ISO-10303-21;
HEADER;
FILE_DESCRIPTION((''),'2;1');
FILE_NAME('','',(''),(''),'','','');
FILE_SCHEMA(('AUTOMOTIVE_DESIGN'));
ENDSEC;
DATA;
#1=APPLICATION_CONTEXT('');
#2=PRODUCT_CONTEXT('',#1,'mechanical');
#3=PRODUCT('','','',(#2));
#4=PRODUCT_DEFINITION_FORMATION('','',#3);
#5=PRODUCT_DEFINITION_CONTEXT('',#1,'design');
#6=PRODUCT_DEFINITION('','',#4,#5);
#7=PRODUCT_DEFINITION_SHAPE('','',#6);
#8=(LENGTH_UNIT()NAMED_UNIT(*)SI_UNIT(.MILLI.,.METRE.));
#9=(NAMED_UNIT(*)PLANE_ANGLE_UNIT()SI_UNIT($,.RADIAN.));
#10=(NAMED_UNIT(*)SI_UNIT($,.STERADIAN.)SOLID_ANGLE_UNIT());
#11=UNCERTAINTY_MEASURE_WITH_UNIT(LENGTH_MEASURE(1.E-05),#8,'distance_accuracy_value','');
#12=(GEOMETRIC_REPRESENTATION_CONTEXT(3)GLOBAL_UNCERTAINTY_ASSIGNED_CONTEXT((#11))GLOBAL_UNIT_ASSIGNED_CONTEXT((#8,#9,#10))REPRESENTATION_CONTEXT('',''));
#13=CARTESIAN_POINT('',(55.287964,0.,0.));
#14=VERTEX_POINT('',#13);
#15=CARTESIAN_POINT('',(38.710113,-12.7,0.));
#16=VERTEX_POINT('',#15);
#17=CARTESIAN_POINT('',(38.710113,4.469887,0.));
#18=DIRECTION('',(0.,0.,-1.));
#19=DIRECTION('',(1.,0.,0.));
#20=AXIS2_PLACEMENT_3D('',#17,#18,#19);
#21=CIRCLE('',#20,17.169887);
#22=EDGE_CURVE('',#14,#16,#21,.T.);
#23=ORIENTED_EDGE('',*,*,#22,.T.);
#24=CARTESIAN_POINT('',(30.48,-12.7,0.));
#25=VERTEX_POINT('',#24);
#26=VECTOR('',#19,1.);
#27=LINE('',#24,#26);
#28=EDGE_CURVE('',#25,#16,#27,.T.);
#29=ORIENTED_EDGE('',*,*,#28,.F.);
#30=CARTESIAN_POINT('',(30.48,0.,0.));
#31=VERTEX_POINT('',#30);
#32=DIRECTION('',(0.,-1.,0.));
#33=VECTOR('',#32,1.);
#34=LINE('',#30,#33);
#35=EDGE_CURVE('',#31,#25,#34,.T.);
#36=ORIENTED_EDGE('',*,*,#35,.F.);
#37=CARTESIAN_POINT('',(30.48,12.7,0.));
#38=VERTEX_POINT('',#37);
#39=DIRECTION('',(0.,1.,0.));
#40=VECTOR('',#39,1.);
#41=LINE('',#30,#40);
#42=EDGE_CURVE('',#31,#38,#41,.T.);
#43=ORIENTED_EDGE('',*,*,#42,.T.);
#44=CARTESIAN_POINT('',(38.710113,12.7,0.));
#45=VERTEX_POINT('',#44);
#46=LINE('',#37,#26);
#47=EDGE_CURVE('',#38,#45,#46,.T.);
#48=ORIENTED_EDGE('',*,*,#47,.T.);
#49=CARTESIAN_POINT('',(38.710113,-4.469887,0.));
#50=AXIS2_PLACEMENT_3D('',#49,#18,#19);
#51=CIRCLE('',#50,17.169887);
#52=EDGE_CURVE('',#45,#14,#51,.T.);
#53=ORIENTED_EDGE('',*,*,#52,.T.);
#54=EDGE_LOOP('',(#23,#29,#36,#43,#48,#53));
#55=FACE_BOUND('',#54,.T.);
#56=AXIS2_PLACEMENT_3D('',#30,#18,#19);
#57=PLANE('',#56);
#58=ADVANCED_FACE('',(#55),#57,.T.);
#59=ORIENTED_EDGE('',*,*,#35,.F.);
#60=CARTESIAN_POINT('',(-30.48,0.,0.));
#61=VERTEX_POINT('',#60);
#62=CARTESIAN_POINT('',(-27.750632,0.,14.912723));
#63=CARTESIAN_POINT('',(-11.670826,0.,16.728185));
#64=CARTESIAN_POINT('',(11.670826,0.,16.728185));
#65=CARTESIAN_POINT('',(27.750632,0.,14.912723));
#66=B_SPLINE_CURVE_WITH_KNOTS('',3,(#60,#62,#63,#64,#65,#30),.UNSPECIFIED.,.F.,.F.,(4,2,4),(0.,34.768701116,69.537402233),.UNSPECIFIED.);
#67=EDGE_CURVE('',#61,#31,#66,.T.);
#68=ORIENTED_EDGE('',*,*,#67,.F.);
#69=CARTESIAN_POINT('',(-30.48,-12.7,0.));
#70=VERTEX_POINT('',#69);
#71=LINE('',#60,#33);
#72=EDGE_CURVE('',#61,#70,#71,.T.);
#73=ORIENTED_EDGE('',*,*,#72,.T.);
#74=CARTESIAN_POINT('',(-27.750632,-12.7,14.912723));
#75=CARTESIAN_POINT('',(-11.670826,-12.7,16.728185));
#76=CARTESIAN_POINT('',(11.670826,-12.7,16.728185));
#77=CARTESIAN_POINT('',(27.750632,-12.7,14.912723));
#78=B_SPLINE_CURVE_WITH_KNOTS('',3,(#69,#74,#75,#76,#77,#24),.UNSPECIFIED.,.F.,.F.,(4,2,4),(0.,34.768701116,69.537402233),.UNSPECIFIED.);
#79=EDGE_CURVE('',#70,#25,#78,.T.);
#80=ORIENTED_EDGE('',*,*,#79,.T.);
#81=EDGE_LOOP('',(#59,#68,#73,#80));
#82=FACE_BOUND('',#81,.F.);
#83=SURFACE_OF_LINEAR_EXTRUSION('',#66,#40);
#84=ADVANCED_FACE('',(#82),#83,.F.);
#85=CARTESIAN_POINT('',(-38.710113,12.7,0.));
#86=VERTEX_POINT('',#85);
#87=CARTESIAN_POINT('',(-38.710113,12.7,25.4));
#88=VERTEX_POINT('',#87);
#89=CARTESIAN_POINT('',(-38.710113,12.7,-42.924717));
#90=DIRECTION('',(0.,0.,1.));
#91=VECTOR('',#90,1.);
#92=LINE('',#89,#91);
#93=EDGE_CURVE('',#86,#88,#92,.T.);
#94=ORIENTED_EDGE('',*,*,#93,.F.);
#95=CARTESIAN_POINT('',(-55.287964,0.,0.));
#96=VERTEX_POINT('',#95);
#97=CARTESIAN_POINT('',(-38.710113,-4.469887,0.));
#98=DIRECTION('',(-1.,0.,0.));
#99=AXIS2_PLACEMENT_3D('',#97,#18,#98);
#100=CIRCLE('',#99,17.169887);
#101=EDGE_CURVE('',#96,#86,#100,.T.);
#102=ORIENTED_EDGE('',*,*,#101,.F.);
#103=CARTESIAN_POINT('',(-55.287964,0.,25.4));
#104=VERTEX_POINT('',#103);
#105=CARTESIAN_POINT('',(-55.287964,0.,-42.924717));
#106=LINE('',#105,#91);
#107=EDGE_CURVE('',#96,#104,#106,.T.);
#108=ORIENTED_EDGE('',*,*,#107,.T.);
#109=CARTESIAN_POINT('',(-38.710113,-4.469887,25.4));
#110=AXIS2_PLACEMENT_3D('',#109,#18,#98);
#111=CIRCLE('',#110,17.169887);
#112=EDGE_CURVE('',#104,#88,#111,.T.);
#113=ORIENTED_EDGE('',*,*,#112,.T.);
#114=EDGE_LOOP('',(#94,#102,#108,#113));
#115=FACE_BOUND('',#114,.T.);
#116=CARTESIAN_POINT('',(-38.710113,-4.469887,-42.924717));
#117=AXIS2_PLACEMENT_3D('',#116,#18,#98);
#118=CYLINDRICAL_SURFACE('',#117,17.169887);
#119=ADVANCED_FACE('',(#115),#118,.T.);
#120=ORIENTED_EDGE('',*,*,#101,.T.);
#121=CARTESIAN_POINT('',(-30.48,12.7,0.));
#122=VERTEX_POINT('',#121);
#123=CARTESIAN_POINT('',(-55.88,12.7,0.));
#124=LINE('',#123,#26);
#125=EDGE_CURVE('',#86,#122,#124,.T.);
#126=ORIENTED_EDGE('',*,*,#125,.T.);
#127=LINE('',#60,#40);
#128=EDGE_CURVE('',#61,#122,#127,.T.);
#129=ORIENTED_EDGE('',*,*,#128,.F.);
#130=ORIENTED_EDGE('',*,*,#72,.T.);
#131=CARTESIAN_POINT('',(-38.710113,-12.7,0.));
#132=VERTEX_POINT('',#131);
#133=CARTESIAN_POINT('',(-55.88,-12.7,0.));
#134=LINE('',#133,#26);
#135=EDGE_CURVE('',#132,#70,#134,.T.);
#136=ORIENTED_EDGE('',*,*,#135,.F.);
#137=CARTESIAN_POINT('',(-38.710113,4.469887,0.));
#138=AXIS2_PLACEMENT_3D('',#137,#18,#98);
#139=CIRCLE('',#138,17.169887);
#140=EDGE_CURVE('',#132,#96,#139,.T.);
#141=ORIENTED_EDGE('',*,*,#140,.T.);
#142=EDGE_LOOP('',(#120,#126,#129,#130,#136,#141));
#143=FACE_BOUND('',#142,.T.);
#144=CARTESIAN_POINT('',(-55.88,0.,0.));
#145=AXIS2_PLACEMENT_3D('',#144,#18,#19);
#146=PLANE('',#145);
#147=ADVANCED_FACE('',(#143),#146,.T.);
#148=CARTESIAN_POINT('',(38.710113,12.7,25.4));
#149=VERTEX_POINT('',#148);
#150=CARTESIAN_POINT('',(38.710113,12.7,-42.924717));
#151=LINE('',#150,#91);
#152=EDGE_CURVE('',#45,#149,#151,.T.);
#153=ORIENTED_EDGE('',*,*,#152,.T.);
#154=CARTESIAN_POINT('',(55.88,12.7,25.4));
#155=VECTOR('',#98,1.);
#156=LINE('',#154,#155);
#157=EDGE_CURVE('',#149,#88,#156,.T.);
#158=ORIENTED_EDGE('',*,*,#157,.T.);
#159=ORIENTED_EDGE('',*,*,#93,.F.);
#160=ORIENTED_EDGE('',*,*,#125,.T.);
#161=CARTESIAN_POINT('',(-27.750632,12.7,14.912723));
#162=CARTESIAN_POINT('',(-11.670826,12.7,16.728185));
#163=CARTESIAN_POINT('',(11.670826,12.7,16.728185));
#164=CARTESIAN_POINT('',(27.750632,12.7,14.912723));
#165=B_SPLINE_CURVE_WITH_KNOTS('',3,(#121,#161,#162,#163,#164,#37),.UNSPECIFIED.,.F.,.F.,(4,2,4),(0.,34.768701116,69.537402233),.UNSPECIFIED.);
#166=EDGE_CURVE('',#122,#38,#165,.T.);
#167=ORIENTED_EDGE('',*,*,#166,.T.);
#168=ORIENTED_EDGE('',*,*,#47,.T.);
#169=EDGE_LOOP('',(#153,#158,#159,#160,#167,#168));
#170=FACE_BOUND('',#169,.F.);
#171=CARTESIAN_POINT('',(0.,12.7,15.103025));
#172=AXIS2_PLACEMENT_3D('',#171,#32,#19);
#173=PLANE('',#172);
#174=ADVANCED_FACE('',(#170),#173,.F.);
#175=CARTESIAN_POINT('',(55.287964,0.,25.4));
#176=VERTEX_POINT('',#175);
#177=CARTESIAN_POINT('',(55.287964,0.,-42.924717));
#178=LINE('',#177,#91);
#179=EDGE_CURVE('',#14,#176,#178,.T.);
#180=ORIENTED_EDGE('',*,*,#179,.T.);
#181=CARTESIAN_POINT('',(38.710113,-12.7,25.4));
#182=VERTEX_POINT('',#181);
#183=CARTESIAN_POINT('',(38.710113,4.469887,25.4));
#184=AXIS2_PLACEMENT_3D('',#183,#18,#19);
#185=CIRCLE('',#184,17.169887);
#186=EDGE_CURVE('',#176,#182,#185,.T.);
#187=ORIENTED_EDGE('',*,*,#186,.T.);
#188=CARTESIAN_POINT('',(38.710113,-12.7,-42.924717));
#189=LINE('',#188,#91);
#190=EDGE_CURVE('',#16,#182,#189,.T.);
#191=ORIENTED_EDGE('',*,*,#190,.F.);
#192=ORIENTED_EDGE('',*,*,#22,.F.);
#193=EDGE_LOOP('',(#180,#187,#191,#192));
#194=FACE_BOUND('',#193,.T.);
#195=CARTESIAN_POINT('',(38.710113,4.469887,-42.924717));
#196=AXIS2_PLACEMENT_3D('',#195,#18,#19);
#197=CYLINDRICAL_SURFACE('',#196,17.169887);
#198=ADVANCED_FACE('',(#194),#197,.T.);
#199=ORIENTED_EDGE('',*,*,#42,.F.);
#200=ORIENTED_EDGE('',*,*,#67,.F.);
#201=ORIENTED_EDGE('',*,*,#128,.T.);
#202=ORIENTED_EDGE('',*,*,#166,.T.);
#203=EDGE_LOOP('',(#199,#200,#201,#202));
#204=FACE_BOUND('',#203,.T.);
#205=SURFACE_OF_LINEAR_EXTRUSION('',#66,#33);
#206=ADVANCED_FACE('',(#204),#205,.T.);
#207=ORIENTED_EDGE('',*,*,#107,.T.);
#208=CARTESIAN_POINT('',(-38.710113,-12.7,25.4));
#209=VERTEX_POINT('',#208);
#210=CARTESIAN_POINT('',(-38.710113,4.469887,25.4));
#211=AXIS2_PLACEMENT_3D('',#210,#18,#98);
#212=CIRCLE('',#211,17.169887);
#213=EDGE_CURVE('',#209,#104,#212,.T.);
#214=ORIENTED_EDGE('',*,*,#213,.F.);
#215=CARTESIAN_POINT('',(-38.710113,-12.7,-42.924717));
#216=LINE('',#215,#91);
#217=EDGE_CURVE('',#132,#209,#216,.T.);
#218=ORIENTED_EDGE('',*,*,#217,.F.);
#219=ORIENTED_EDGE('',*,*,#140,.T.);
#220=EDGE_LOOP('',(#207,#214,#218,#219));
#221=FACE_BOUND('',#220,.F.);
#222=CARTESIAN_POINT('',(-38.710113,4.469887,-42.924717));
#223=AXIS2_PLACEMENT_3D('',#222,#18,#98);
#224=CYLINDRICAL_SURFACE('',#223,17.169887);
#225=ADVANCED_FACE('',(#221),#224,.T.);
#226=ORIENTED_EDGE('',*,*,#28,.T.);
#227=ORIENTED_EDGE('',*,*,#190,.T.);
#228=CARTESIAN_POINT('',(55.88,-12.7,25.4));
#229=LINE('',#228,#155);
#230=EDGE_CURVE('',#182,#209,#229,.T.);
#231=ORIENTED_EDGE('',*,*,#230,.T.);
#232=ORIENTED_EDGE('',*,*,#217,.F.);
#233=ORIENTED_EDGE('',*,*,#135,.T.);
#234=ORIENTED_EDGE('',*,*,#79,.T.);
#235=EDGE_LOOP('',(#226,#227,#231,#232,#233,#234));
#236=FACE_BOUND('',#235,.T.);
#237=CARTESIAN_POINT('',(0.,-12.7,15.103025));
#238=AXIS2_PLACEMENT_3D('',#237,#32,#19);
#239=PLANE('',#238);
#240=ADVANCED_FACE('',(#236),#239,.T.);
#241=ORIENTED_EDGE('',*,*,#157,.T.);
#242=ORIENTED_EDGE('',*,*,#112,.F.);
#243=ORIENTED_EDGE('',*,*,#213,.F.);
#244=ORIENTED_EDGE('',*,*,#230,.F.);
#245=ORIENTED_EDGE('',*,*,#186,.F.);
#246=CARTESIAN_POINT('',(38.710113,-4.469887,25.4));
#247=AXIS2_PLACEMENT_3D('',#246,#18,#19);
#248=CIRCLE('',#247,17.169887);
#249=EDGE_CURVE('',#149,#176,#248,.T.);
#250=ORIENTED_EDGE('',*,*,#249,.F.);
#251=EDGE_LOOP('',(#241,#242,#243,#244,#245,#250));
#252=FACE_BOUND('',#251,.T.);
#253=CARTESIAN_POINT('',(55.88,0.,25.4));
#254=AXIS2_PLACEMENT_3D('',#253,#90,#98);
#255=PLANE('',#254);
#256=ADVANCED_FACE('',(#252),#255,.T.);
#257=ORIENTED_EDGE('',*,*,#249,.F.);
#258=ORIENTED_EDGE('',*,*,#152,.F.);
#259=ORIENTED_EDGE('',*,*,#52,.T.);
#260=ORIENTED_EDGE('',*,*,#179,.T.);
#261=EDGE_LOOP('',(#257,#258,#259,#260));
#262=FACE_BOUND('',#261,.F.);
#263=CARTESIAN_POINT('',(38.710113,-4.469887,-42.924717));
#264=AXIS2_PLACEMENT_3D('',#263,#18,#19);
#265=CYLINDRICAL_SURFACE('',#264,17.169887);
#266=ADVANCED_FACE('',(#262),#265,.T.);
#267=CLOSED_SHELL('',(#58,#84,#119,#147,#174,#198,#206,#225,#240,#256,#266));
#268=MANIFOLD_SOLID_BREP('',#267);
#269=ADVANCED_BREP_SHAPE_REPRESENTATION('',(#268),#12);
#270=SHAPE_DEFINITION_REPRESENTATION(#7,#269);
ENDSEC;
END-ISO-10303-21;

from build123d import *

# Parameters (mm, degrees)
F1_DEPTH    = 12.7
F2_T1_DEPTH = 111.249434278


# Not quite as in the source:
# - a fillet or chamfer that OpenCascade refuses, or shapes differently, is made with other operations: its cross-section is extruded or revolved along the edge and cut away or added


with BuildPart() as f1:
    # F0 (on Front) → F1 (new body, symmetric)
    with BuildSketch(Plane.XZ):
        with BuildLine():
            Line((-55.88, 0), (-30.48, 0))
            add(Edge.make_bspline(
                [(-30.48, 0), (-27.7506317943, 14.9127226323), (-11.670826003, 16.7281851172), (0, 16.7281851172)],
                knots=[0, 0, 0, 0, 34.7687011163, 34.7687011163, 34.7687011163, 34.7687011163], degree=3))
            add(Edge.make_bspline(
                [(30.48, 0), (27.7506317943, 14.9127226323), (11.670826003, 16.7281851172), (0, 16.7281851172)],
                knots=[0, 0, 0, 0, 34.7687011163, 34.7687011163, 34.7687011163, 34.7687011163], degree=3))
            Line((30.48, 0), (55.88, 0))
            Line((55.88, 0), (55.88, 25.4))
            Line((55.88, 25.4), (-55.88, 25.4))
            Line((-55.88, 25.4), (-55.88, 0))
        make_face()
    extrude(amount=F1_DEPTH, both=True)

    # F2: fillet of radius 17.1698868556 on 4 edges, made by hand

    # F2_s2 → F2_t1 (cut)
    with BuildSketch(Plane.XY.offset(-42.924717139)):
        with BuildLine():
            ThreePointArc((55.88, 4.4698868556), (50.8510565722, -7.6710565722), (38.7101131444, -12.7))
            Line((38.7101131444, -12.7), (55.88, -12.7))
            Line((55.88, -12.7), (55.88, 4.4698868556))
        make_face()
        with BuildLine():
            ThreePointArc((55.88, -4.4698868556), (50.8510565722, 7.6710565722), (38.7101131444, 12.7))
            Line((38.7101131444, 12.7), (55.88, 12.7))
            Line((55.88, 12.7), (55.88, -4.4698868556))
        make_face()
        with BuildLine():
            ThreePointArc((-55.88, 4.4698868556), (-50.8510565722, -7.6710565722), (-38.7101131444, -12.7))
            Line((-38.7101131444, -12.7), (-55.88, -12.7))
            Line((-55.88, -12.7), (-55.88, 4.4698868556))
        make_face()
        with BuildLine():
            ThreePointArc((-55.88, -4.4698868556), (-50.8510565722, 7.6710565722), (-38.7101131444, 12.7))
            Line((-38.7101131444, 12.7), (-55.88, 12.7))
            Line((-55.88, 12.7), (-55.88, -4.4698868556))
        make_face()
    extrude(amount=F2_T1_DEPTH, mode=Mode.SUBTRACT)


solid = f1.part
